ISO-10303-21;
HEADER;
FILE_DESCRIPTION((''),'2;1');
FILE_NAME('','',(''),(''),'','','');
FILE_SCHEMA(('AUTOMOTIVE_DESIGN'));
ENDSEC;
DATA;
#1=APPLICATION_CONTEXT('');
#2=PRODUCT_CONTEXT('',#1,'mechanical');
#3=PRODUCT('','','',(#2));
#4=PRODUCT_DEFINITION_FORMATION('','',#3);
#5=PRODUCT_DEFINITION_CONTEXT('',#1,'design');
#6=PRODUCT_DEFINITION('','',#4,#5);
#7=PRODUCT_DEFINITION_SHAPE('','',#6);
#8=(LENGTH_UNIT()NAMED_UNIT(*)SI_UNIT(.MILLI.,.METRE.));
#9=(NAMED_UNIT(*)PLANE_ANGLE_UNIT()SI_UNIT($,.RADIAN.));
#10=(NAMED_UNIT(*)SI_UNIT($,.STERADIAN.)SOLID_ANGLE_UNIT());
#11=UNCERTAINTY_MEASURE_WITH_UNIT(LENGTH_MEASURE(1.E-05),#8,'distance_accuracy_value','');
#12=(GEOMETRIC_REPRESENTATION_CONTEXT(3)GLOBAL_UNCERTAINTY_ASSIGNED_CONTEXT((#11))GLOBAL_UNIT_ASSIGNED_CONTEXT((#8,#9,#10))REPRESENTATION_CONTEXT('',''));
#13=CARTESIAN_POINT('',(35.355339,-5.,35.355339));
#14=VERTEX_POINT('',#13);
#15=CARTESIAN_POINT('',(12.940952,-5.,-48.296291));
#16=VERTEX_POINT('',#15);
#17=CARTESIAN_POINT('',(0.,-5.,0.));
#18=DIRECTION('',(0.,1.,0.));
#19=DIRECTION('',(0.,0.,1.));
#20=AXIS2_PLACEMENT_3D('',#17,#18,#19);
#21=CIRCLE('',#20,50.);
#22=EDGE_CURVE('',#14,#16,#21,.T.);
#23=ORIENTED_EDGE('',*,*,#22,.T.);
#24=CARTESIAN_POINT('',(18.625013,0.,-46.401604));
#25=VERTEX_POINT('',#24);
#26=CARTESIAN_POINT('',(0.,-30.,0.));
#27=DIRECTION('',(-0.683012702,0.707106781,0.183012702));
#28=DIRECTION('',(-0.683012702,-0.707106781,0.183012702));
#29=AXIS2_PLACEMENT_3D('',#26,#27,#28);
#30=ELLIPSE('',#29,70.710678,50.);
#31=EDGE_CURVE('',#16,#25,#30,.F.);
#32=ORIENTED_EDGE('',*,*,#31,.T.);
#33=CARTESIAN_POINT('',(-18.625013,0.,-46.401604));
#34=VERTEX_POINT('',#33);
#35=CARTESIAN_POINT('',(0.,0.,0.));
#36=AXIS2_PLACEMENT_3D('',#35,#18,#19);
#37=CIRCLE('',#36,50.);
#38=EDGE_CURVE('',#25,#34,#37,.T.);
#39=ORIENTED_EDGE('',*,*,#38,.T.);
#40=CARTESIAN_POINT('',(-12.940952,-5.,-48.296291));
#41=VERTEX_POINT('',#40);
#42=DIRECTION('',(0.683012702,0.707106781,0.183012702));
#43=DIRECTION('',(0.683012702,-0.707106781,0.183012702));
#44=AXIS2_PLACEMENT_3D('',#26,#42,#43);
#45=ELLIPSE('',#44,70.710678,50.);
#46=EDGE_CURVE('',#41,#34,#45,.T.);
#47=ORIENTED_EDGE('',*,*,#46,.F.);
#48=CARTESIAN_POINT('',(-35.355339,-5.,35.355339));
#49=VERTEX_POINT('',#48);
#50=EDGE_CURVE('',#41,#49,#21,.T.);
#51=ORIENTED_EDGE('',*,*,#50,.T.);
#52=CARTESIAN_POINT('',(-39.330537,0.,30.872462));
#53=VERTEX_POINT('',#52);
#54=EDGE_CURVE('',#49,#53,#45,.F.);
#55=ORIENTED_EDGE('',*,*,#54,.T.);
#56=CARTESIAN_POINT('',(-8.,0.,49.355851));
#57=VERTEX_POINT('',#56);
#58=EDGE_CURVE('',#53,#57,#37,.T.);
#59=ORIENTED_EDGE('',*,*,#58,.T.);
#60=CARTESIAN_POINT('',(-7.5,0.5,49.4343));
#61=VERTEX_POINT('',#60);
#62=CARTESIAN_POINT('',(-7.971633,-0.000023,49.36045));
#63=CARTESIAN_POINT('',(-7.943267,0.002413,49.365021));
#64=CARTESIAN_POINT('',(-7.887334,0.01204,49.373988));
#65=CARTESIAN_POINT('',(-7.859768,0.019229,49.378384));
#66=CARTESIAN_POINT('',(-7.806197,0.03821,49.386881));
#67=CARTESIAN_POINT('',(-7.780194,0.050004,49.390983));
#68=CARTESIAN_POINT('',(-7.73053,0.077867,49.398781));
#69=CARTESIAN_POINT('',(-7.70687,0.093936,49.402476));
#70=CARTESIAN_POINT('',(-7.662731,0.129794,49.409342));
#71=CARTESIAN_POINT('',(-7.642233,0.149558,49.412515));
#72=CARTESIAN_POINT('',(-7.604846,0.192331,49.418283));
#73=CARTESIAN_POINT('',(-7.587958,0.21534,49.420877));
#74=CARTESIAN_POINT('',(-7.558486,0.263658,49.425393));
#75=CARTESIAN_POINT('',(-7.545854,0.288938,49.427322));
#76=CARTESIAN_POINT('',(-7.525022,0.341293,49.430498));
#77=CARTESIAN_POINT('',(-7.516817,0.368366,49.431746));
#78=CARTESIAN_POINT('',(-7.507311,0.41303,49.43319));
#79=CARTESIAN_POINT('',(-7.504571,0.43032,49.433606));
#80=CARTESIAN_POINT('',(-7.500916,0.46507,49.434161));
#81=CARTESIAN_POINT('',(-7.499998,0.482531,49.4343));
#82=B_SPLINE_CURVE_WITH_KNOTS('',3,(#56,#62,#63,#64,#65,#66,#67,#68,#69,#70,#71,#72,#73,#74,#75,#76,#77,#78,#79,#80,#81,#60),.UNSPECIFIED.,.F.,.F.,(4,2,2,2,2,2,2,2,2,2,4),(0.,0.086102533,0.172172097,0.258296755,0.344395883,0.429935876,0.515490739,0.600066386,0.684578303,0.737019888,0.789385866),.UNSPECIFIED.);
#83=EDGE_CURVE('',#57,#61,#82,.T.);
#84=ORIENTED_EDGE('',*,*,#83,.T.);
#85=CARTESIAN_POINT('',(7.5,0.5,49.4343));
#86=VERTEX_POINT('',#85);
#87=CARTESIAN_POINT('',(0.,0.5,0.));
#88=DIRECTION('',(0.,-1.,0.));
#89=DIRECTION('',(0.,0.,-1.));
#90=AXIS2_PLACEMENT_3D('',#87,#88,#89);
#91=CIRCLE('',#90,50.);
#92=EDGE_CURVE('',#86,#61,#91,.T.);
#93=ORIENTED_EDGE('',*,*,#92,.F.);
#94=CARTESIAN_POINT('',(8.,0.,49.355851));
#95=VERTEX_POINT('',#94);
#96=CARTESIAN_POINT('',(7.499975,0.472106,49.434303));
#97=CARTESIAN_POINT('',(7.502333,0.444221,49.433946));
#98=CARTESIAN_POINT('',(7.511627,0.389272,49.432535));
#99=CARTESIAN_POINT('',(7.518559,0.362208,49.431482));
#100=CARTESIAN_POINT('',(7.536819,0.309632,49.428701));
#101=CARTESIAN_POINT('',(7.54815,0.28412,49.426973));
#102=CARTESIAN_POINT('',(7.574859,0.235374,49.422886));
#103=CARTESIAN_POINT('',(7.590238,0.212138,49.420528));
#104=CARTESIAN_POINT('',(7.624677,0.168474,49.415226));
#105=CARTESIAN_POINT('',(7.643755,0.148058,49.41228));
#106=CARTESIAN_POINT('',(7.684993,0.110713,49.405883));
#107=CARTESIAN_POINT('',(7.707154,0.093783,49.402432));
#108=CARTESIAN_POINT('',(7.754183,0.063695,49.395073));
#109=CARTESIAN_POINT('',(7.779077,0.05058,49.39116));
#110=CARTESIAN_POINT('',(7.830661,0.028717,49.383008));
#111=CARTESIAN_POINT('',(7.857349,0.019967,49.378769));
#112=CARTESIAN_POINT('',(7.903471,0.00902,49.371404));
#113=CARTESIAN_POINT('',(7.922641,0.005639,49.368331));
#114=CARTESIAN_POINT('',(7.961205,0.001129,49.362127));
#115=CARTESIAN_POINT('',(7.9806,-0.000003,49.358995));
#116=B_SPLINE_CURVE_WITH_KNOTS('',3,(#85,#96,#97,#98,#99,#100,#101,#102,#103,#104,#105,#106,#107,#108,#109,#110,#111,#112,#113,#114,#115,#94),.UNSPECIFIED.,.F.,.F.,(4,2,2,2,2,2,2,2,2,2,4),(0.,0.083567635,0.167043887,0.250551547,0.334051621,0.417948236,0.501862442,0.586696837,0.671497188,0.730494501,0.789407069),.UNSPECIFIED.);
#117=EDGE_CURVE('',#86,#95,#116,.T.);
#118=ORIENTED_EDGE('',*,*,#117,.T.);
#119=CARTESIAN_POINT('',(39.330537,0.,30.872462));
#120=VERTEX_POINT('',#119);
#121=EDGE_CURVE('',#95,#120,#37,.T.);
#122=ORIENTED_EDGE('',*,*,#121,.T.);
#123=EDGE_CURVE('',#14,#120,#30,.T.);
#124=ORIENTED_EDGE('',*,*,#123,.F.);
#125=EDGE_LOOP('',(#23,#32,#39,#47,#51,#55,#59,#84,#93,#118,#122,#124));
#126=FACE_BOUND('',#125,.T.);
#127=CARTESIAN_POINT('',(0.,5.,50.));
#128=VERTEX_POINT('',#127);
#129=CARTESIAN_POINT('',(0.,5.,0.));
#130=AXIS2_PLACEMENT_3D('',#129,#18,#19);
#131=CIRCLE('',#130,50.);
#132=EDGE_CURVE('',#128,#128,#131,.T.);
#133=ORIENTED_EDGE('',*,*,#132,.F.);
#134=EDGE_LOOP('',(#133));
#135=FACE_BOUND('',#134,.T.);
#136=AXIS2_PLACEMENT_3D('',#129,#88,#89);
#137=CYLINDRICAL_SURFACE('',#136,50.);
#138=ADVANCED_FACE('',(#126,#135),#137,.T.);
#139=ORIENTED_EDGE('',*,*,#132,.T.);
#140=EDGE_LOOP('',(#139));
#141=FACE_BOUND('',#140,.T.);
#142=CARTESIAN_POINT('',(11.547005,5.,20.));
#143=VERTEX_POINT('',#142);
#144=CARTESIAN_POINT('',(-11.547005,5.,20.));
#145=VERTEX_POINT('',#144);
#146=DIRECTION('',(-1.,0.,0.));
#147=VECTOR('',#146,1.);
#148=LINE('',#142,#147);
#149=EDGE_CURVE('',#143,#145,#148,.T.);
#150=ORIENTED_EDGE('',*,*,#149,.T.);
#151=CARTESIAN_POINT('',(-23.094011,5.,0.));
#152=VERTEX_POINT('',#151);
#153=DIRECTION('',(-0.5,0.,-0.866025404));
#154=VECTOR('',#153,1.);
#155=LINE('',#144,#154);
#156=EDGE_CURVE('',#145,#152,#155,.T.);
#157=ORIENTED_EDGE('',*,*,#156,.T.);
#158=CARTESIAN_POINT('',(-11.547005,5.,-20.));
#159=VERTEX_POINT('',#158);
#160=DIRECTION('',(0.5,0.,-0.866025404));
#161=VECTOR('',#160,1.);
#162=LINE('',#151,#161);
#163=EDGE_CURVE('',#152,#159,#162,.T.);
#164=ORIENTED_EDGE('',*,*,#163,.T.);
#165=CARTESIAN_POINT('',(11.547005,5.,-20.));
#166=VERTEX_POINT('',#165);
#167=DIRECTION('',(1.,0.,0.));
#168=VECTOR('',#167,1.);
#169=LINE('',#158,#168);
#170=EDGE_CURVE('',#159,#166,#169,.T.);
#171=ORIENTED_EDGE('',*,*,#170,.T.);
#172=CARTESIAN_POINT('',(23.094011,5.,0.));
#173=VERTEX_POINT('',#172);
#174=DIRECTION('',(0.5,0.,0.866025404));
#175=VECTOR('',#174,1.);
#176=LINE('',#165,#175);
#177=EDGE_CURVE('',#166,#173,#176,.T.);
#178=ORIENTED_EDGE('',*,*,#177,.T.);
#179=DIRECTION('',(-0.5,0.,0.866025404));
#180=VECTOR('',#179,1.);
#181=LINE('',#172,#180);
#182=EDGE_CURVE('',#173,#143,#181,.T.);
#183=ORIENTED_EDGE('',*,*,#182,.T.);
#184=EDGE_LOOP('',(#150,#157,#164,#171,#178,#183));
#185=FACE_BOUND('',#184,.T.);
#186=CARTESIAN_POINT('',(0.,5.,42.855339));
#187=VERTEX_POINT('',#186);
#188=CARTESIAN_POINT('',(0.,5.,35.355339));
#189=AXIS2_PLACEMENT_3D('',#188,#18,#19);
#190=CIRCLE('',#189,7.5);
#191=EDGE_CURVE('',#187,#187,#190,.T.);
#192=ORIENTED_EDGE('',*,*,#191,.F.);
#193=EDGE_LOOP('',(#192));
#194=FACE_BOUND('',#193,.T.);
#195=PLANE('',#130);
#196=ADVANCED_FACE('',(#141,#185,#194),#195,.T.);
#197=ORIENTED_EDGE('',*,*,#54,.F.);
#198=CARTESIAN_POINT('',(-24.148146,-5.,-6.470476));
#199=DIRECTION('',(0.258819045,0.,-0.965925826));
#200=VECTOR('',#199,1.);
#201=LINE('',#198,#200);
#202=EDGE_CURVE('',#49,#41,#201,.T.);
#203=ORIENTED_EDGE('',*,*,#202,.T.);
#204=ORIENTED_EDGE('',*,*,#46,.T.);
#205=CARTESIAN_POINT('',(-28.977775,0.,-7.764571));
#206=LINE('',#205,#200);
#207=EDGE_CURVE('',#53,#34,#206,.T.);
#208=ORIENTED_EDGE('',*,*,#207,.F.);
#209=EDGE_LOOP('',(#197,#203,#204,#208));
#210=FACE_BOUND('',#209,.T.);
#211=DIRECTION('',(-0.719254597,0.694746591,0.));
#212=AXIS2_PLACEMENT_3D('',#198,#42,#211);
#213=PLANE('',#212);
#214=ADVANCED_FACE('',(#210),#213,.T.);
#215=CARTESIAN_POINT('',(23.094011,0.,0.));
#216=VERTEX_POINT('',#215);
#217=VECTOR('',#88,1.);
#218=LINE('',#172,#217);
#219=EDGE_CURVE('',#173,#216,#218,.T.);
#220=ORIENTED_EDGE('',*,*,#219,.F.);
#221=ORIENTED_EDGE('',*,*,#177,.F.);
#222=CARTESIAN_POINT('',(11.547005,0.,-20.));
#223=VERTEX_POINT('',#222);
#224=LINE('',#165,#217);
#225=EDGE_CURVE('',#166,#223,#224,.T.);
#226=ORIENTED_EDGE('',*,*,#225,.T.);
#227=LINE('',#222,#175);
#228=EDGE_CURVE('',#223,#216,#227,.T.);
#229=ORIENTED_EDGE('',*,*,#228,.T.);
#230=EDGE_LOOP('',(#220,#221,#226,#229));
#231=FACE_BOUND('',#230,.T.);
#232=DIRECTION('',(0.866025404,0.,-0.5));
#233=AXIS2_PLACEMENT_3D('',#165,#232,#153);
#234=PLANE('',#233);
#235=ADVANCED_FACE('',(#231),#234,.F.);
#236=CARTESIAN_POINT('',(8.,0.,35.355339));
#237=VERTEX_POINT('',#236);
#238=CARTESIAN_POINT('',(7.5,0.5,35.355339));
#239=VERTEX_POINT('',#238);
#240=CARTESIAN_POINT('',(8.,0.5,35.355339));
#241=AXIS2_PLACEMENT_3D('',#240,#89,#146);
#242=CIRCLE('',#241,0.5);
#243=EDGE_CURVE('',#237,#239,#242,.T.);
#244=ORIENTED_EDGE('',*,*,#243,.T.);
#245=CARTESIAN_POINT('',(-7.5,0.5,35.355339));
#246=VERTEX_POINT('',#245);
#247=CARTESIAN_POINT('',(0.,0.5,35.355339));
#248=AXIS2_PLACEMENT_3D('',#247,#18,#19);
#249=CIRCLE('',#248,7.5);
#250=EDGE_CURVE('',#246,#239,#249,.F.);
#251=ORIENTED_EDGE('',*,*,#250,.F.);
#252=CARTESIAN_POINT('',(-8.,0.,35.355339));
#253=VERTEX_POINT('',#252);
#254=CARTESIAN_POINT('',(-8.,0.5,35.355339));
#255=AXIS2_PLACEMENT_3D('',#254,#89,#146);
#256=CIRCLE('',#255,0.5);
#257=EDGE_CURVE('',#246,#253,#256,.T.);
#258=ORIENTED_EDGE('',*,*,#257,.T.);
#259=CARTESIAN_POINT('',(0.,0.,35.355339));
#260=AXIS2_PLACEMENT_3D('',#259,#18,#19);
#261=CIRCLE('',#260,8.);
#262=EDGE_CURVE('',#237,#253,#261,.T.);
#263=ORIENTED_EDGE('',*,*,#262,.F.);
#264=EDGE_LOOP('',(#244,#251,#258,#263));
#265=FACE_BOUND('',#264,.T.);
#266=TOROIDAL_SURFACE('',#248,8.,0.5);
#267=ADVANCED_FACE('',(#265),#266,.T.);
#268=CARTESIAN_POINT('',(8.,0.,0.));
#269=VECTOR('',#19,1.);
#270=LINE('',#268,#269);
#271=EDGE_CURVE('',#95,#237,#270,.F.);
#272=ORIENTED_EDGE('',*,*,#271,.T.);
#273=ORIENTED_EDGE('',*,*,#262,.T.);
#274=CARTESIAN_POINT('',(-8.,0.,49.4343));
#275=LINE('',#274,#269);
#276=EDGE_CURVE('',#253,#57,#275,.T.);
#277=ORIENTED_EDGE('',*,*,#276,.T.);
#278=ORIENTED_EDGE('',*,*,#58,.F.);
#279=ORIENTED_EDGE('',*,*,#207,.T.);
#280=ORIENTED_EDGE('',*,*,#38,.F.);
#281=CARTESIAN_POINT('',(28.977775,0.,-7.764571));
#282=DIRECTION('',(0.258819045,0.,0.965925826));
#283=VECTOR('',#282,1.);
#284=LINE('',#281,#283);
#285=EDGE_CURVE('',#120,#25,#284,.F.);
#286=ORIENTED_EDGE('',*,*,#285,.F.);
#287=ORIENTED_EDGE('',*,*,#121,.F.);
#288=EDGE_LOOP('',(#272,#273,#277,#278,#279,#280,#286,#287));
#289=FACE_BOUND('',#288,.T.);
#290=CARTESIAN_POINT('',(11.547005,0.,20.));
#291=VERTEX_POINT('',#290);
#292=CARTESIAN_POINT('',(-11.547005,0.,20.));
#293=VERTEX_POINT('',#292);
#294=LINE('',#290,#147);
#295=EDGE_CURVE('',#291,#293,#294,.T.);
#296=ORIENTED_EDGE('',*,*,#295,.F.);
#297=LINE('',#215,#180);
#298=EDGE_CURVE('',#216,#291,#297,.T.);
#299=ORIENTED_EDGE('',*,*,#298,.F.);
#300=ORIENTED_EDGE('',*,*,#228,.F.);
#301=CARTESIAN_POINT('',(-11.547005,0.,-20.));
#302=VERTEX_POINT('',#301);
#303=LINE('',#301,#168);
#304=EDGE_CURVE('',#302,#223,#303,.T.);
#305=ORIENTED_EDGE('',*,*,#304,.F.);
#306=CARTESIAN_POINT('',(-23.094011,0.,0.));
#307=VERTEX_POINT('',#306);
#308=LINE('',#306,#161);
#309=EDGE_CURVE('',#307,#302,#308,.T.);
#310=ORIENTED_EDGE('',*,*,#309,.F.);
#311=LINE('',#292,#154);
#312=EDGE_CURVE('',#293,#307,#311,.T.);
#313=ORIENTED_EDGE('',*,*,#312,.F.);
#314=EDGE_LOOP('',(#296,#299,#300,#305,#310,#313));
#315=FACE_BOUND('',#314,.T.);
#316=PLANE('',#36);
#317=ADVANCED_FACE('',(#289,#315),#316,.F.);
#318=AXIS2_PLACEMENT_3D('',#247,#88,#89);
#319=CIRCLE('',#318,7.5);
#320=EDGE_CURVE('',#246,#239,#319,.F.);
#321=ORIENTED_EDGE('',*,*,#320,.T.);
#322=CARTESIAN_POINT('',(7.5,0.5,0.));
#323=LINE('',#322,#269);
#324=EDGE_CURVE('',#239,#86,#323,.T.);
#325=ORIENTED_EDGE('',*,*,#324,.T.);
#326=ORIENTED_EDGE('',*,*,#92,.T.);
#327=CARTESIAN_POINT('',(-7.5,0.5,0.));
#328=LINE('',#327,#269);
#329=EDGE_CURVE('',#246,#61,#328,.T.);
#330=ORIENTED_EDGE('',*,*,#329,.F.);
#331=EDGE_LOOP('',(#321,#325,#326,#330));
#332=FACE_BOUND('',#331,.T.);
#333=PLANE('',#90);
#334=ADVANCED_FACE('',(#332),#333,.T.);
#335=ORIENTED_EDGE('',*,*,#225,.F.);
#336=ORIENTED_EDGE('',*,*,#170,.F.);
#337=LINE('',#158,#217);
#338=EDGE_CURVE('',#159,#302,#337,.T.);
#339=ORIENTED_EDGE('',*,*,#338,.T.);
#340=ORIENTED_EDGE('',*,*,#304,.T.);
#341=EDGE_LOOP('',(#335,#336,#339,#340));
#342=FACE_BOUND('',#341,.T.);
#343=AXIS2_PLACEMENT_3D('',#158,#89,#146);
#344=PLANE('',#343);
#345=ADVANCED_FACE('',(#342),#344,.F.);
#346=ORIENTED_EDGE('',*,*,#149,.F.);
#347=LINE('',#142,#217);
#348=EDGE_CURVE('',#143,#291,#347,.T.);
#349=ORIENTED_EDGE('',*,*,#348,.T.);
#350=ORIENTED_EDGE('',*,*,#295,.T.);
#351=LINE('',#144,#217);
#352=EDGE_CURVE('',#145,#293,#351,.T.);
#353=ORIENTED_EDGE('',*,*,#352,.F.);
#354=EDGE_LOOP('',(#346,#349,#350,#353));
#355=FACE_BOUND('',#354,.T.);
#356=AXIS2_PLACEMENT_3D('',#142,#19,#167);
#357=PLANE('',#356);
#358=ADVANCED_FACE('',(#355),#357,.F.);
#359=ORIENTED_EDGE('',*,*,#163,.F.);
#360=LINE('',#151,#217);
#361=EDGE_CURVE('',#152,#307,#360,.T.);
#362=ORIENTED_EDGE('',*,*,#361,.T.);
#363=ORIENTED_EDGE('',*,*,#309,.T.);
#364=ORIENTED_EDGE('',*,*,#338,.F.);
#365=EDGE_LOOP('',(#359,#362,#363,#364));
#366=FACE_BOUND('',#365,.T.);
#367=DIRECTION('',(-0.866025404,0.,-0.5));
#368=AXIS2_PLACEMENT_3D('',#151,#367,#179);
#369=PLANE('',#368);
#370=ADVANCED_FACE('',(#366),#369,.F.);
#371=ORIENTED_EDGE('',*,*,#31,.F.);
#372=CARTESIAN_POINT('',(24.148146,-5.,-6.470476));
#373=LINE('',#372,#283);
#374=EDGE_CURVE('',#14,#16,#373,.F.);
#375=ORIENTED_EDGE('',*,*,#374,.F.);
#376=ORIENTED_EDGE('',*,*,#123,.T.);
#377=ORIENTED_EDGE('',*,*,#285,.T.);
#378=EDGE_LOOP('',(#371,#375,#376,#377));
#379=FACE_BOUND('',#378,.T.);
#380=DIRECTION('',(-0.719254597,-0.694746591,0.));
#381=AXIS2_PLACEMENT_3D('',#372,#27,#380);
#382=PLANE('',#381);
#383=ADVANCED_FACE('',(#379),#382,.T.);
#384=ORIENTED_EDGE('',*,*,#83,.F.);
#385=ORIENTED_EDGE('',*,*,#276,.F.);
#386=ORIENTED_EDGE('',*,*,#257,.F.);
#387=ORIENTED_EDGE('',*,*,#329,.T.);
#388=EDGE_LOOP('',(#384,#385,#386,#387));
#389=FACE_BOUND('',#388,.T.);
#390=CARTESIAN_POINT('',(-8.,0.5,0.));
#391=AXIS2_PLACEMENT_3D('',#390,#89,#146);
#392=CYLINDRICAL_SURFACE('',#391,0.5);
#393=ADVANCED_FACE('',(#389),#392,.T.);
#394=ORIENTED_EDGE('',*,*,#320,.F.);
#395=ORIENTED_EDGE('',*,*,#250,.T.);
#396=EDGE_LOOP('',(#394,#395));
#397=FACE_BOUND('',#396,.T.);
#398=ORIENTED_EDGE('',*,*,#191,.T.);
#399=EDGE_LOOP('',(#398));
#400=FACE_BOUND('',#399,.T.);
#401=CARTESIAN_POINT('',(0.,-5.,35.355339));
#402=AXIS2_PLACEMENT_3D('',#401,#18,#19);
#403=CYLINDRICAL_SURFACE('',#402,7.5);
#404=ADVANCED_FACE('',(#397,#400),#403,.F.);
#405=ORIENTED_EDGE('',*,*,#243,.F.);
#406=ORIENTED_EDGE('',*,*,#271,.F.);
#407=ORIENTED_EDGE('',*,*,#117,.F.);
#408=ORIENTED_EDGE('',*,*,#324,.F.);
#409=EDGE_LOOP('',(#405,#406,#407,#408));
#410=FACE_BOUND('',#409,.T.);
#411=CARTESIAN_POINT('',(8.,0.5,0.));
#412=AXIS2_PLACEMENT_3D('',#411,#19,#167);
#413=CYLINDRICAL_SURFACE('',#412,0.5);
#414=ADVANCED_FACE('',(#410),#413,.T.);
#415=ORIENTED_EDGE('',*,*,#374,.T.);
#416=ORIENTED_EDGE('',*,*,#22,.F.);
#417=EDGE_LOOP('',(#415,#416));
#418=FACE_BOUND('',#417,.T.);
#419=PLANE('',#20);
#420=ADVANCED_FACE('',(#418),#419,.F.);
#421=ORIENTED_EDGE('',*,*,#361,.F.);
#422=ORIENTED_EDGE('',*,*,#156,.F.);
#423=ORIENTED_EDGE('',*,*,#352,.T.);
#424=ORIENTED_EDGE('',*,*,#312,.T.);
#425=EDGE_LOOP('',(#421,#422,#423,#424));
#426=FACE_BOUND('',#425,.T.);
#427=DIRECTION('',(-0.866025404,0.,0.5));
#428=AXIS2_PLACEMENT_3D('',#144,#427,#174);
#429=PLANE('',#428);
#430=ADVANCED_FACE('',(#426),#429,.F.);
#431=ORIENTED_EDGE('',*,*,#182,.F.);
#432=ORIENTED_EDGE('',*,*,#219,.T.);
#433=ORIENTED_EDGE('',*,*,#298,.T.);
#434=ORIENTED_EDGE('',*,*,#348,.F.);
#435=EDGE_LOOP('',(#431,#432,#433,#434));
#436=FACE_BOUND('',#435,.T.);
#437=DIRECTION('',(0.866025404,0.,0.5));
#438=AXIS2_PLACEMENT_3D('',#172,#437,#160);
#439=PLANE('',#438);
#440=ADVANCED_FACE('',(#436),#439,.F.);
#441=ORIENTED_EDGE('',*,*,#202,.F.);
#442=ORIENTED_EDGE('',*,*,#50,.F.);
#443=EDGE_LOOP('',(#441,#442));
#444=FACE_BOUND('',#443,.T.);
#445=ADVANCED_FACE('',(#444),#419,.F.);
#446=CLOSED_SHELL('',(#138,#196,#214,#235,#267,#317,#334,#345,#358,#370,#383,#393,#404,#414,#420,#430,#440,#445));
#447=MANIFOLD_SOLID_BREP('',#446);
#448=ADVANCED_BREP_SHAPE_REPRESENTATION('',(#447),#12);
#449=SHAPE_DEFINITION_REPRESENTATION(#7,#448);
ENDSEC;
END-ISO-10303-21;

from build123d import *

# Parameters (mm, degrees)
SKETCH1_R               = 50
BOSS_EXTRUDE1_DEPTH     = 5
BOSS_EXTRUDE2_START     = -5
BOSS_EXTRUDE2_DEPTH     = 5
DRAFT1_ANGLE            = -45
CUT_EXTRUDE2_DEPTH      = 71.887234394
CUT_EXTRUDE2_DEPTH_BACK = 71.887234394
SKETCH1_8_R             = 7.5
CUT_EXTRUDE3_DEPTH      = 71.887234394
CUT_EXTRUDE4_DEPTH      = 0.5
FILLET1_R               = 0.5


with BuildPart() as part:
    # Sketch1 → Boss-Extrude1 (new body)
    with BuildSketch(Plane(origin=(0, 0, 0), x_dir=(1, 0, 0), z_dir=(0, 1, 0))):
        with Locations(Location((0, 0, 0), (0, 0, 270))):
            Circle(SKETCH1_R)
    extrude(amount=BOSS_EXTRUDE1_DEPTH)

    # Sketch1<5> → Boss-Extrude2 (add)
    with BuildSketch(Plane(origin=(0, 0, 0), x_dir=(1, 0, 0), z_dir=(0, 1, 0)).offset(BOSS_EXTRUDE2_START)):
        with BuildLine():
            Line((12.940952255, 48.296291314), (35.355339059, -35.355339059))
            ThreePointArc((35.355339059, -35.355339059), (46.193976626, -19.134171618), (50, 0))
            ThreePointArc((50, 0), (39.667667015, 30.43807145), (12.940952255, 48.296291314))
        make_face()
        with BuildLine():
            ThreePointArc((-12.940952255, 48.296291314), (-48.296291314, 12.940952255), (-35.355339059, -35.355339059))
            Line((-35.355339059, -35.355339059), (-12.940952255, 48.296291314))
        make_face()
    extrude(amount=BOSS_EXTRUDE2_DEPTH)

    # Draft1
    draft1_faces = [part.faces().sort_by_distance(p)[0] for p in [
        (24.148145657, -2.5, -6.470476128),
        (-24.148145657, -2.5, -6.470476128),
    ]]
    draft(draft1_faces, Plane(origin=(0, -5, 0), x_dir=(0, 0, -1), z_dir=(0, -1, 0)), DRAFT1_ANGLE)

    # Sketch1<8> → Cut-Extrude2 (cut, two sides: drawn at the far end of the back side and taken through both)
    with BuildSketch(Plane(origin=(0, 0, 0), x_dir=(1, 0, 0), z_dir=(0, 1, 0)).offset(-CUT_EXTRUDE2_DEPTH_BACK)):
        with Locations(Location((0, -35.355339059, 0), (0, 0, 270))):
            Circle(SKETCH1_8_R)
    extrude(amount=CUT_EXTRUDE2_DEPTH + CUT_EXTRUDE2_DEPTH_BACK, mode=Mode.SUBTRACT)

    # Sketch2 → Cut-Extrude3 (cut, through all)
    with BuildSketch(Plane.XZ):
        Polygon((23.094010768, 0), (11.547005384, 20), (-11.547005384, 20), (-23.094010768, 0), (-11.547005384, -20), (11.547005384, -20), align=None)
    extrude(amount=-CUT_EXTRUDE3_DEPTH, mode=Mode.SUBTRACT)

    # Sketch3 → Cut-Extrude4 (cut)
    with BuildSketch(Plane.XZ):
        with BuildLine():
            ThreePointArc((-7.5, 35.355339059), (0, 42.855339059), (7.5, 35.355339059))
            Line((7.5, 35.355339059), (7.5, 49.434299833))
            ThreePointArc((7.5, 49.434299833), (0, 50), (-7.5, 49.434299833))
            Line((-7.5, 49.434299833), (-7.5, 35.355339059))
        make_face()
    extrude(amount=-CUT_EXTRUDE4_DEPTH, mode=Mode.SUBTRACT)

    # Fillet1
    fillet1_edges = [part.edges().sort_by_distance(p)[0] for p in [
        (0, 0, 27.855339059),
        (-7.5, 0, 42.394819446),
        (7.5, 0, 42.394819446),
    ]]
    fillet(fillet1_edges, radius=FILLET1_R - 0.0001)  # a hair under: the kernel refuses the full size


solid = part.part
